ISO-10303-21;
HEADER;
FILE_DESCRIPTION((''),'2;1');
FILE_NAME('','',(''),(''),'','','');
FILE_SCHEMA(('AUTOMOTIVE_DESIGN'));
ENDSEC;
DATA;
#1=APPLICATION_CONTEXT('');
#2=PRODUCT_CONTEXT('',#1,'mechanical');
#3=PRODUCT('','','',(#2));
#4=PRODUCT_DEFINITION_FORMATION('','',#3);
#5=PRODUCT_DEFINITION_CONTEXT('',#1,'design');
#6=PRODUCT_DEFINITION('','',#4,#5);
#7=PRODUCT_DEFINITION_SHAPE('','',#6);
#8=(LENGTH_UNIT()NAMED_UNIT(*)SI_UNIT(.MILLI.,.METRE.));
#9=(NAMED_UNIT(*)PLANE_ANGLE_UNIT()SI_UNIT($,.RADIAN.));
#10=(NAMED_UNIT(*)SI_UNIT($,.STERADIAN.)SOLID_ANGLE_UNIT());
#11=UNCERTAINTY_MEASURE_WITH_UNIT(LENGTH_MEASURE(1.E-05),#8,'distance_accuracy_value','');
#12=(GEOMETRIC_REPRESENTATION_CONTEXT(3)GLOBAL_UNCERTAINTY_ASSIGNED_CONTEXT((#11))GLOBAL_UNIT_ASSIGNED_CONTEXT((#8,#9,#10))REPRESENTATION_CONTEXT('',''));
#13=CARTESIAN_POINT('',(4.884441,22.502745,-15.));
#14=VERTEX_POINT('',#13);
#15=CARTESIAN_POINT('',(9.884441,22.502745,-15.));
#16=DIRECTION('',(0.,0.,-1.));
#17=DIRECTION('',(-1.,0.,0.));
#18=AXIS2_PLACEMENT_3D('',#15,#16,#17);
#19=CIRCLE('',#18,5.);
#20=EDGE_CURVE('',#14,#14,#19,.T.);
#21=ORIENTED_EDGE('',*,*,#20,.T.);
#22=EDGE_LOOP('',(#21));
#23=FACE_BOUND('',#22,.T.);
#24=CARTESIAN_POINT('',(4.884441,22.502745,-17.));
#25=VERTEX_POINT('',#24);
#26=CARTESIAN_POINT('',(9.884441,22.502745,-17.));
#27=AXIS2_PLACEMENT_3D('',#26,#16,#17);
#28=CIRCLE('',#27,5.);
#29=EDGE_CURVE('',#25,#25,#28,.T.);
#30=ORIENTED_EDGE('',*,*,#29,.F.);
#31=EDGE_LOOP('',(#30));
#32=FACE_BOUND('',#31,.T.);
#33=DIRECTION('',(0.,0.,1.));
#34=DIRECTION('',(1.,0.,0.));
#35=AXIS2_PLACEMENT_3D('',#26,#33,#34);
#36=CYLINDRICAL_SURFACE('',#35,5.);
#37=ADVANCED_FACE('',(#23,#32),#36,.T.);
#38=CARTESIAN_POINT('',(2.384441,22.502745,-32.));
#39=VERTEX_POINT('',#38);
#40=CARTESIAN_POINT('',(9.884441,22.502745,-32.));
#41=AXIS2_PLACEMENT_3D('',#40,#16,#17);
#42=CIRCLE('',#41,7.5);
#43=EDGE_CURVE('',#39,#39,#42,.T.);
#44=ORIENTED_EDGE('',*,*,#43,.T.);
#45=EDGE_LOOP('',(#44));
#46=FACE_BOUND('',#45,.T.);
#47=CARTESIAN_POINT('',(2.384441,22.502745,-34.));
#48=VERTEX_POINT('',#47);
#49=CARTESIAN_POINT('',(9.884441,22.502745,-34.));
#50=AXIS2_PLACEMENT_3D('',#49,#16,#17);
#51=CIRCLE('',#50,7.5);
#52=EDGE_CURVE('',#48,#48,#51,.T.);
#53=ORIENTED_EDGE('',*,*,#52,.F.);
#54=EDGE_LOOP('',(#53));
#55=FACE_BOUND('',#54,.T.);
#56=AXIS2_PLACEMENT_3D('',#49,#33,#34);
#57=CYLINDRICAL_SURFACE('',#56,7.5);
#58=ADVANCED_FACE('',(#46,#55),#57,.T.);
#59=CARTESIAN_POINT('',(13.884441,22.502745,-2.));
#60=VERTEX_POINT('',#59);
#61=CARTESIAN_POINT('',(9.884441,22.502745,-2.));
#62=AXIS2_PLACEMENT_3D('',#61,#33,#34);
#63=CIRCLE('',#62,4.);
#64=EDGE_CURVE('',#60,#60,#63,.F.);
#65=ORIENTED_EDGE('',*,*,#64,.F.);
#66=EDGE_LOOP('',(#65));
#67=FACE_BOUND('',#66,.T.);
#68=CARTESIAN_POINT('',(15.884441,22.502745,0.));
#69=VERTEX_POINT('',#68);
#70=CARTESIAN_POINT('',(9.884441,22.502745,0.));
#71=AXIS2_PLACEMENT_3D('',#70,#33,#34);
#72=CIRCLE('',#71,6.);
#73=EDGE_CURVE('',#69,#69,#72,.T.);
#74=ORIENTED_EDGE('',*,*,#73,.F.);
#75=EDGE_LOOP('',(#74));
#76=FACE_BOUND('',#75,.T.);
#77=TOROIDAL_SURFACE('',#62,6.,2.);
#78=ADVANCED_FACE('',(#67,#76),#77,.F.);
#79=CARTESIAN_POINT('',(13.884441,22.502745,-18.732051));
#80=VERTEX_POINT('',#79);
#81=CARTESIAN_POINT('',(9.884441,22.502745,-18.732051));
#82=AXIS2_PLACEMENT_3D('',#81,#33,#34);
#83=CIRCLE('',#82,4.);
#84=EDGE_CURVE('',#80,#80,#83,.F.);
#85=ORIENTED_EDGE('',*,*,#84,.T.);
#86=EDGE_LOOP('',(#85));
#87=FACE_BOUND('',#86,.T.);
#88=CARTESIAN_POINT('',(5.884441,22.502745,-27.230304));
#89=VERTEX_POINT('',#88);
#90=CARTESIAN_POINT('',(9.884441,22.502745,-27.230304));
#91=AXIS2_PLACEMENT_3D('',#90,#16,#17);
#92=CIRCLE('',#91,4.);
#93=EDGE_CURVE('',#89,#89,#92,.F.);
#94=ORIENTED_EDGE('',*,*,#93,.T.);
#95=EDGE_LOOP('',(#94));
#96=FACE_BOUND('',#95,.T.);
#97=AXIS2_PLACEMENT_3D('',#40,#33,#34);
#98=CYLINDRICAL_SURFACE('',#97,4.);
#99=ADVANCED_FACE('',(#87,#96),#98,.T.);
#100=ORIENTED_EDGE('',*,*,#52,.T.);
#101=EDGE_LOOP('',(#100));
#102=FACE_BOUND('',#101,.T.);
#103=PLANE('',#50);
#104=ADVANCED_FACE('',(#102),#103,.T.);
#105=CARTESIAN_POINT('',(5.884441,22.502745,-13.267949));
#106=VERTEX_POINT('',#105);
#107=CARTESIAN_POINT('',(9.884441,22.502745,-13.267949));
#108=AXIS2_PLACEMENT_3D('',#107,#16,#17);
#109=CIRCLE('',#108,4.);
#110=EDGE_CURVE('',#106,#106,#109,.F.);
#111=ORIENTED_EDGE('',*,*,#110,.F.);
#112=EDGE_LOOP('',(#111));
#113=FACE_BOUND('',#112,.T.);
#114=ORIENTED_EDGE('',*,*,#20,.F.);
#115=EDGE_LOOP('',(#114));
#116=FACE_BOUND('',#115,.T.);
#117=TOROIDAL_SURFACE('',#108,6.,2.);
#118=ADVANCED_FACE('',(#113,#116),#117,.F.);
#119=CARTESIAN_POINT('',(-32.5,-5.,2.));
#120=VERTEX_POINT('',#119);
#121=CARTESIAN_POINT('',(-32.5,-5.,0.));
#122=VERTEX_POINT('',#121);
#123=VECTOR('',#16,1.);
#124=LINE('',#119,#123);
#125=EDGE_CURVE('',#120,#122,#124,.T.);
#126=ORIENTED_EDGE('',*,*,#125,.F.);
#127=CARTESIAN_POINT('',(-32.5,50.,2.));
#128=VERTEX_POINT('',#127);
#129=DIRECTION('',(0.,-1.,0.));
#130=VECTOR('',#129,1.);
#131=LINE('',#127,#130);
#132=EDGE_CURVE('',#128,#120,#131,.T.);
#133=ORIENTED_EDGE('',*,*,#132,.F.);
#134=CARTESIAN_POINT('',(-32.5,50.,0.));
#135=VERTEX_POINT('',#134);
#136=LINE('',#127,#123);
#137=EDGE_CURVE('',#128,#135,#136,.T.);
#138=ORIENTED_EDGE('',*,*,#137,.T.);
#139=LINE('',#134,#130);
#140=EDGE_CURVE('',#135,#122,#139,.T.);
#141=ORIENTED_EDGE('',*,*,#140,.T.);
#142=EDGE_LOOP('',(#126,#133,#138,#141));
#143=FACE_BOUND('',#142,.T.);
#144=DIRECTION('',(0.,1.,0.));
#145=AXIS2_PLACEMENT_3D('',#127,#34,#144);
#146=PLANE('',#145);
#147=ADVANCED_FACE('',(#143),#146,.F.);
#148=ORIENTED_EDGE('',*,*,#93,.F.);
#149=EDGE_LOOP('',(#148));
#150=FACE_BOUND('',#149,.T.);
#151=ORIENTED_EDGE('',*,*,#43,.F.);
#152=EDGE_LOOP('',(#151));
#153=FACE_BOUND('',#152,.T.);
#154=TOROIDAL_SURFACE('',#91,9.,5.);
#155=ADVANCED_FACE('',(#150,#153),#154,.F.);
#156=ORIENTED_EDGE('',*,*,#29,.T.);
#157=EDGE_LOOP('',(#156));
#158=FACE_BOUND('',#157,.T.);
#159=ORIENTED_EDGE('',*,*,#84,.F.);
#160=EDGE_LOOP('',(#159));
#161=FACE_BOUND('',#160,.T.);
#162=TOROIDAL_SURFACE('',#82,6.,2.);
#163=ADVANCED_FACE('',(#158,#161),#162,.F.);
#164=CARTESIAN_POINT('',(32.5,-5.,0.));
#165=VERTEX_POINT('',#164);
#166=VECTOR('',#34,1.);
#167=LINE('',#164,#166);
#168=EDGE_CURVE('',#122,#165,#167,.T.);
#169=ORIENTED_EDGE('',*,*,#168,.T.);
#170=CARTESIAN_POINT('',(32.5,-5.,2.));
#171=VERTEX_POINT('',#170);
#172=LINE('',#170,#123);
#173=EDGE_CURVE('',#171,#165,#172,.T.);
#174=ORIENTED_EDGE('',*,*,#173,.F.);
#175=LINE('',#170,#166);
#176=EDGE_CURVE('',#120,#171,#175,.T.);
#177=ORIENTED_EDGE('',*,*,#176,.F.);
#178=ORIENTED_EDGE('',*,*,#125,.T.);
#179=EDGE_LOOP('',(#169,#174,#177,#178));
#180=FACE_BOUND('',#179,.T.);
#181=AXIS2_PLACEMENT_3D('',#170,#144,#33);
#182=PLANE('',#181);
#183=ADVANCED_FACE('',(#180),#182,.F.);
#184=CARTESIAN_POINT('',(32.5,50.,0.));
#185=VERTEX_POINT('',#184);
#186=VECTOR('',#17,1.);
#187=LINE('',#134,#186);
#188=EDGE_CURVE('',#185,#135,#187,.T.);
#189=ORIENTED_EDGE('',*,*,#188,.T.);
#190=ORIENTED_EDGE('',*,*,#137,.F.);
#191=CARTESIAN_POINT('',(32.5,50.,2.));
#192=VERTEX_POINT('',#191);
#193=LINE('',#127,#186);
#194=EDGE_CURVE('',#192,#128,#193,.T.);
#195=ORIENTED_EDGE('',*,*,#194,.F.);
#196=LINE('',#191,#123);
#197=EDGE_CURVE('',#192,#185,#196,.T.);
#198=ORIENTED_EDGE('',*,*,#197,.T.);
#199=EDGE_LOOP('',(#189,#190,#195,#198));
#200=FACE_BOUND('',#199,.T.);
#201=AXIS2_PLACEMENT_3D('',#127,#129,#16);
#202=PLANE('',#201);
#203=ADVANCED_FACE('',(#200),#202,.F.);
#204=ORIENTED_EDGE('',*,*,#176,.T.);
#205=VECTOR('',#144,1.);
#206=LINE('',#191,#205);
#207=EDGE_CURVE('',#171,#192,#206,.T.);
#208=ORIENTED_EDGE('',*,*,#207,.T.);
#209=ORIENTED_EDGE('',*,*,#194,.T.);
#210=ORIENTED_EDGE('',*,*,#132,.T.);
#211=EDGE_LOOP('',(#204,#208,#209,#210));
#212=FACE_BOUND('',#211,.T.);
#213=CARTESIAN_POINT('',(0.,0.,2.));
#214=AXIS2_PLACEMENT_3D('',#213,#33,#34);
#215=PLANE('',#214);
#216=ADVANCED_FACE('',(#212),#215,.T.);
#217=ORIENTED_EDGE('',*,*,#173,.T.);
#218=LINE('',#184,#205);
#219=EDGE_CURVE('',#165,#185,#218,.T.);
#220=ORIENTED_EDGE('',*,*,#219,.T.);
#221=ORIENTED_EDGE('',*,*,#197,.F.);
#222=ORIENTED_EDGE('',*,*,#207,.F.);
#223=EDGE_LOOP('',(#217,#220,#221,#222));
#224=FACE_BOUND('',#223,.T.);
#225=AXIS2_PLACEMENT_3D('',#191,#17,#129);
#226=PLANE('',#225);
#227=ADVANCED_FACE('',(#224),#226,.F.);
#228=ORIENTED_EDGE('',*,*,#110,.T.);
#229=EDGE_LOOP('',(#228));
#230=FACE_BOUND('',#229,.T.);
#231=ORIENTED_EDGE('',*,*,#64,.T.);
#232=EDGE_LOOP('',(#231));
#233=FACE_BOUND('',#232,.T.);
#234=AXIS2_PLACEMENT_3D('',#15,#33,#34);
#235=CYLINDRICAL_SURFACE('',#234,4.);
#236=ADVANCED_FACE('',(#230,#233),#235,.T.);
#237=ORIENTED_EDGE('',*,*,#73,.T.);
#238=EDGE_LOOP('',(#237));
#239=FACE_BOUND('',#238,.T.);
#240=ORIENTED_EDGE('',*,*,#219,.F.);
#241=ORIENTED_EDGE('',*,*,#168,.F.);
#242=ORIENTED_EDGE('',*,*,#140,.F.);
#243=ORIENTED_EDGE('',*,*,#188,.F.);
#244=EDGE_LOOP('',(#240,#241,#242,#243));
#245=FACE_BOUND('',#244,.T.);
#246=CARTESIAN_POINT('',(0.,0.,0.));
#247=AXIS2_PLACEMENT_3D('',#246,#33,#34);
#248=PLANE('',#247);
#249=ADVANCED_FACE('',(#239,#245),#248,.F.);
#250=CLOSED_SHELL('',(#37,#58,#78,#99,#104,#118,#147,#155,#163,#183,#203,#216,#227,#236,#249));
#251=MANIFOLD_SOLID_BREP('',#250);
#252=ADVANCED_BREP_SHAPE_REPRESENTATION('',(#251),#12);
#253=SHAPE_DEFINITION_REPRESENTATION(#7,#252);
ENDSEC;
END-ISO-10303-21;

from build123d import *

# Parameters (mm, degrees)
SKIZZE2_W                       = 65
SKIZZE2_H                       = 100
AUFSATZ_LINEAR_AUSTRAGEN1_DEPTH = 2
SKIZZE3_R                       = 4
AUFSATZ_LINEAR_AUSTRAGEN2_DEPTH = 15
SKIZZE4_R                       = 5
AUFSATZ_LINEAR_AUSTRAGEN3_DEPTH = 2
SKIZZE5_R                       = 4
AUFSATZ_LINEAR_AUSTRAGEN4_DEPTH = 15
SKIZZE6_R                       = 7.5
AUFSATZ_LINEAR_AUSTRAGEN5_DEPTH = 2
VERRUNDUNG1_R                   = 2
VERRUNDUNG2_R                   = 2
VERRUNDUNG3_R                   = 5
SKIZZE7_W                       = 65
SKIZZE7_H                       = 45
SCHNITT_LINEAR_AUSTRAGEN1_DEPTH = 2
VERRUNDUNG4_R                   = 2


with BuildPart() as part:
    # Skizze2 → Aufsatz-Linear austragen1 (new body)
    with BuildSketch(Plane.XY):
        Rectangle(SKIZZE2_W, SKIZZE2_H)
    extrude(amount=AUFSATZ_LINEAR_AUSTRAGEN1_DEPTH)

    # Skizze3 → Aufsatz-Linear austragen2 (add)
    with BuildSketch(Plane(origin=(9.884440789, -5.646814133, 0), x_dir=(-1, 0, 0), z_dir=(0, 0, -1))):
        with Locations(Location((0, 28.149559508, 0), (0, 0, 180))):
            Circle(SKIZZE3_R)
    extrude(amount=AUFSATZ_LINEAR_AUSTRAGEN2_DEPTH)

    # Skizze4 → Aufsatz-Linear austragen3 (add)
    with BuildSketch(Plane(origin=(9.884440789, -5.646814133, -15), x_dir=(-1, 0, 0), z_dir=(0, 0, -1))):
        with Locations((0, 28.149559508)):
            Circle(SKIZZE4_R)
    extrude(amount=AUFSATZ_LINEAR_AUSTRAGEN3_DEPTH)

    # Skizze5 → Aufsatz-Linear austragen4 (add)
    with BuildSketch(Plane(origin=(9.884440789, -5.646814133, -17), x_dir=(-1, 0, 0), z_dir=(0, 0, -1))):
        with Locations(Location((0, 28.149559508, 0), (0, 0, 180))):
            Circle(SKIZZE5_R)
    extrude(amount=AUFSATZ_LINEAR_AUSTRAGEN4_DEPTH)

    # Skizze6 → Aufsatz-Linear austragen5 (add)
    with BuildSketch(Plane(origin=(9.884440789, -5.646814133, -32), x_dir=(-1, 0, 0), z_dir=(0, 0, -1))):
        with Locations((0, 28.149559508)):
            Circle(SKIZZE6_R)
    extrude(amount=AUFSATZ_LINEAR_AUSTRAGEN5_DEPTH)

    # Verrundung1
    # the kernel refuses this fillet: 2 mm, written as the material it adds along each edge
    with BuildSketch(Plane(origin=(9.884440789, 22.502745375, -15), x_dir=(1, 0, 0), z_dir=(0, 1, 0))) as verrundung1_piece_1:
        with BuildLine():
            CenterArc((6, -1.732050808), VERRUNDUNG1_R, 120, 60)
            Line((4, -1.732050808), (3.96, -1.732050808))
            Line((3.96, -1.732050808), (3.96, 0))
            Line((3.96, 0), (4, 0.04))
            ThreePointArc((4, 0.04), (4.5, 0.04), (4.98, 0.034641016))
            Line((4.98, 0.034641016), (5, 0))
        make_face()
    revolve(axis=Axis((9.884440789, 22.502745375, -15), (0, 0, -1)))

    # Verrundung2
    # the kernel refuses this fillet: 2 mm, written as the material it adds along each edge
    with BuildSketch(Plane(origin=(9.884440789, 22.502745375, -17), x_dir=(1, 0, 0), z_dir=(0, 1, 0))) as verrundung2_piece_1:
        with BuildLine():
            CenterArc((6, 1.732050808), VERRUNDUNG2_R, 180, 60)
            Line((4, 1.732050808), (3.96, 1.732050808))
            Line((3.96, 1.732050808), (3.96, 0))
            Line((3.96, 0), (4, -0.04))
            ThreePointArc((4, -0.04), (4.5, -0.04), (4.98, -0.034641016))
            Line((4.98, -0.034641016), (5, 0))
        make_face()
    revolve(axis=Axis((9.884440789, 22.502745375, -17), (0, 0, -1)))

    # Verrundung3
    # the kernel refuses this fillet: 5 mm, written as the material it adds along each edge
    with BuildSketch(Plane(origin=(9.884440789, 22.502745375, -32), x_dir=(1, 0, 0), z_dir=(0, 1, 0))) as verrundung3_piece_1:
        with BuildLine():
            CenterArc((9, -4.769696007), VERRUNDUNG3_R, 107.457603124, 72.542396876)
            Line((7.5, 0), (7.47, 0.09539392))
            ThreePointArc((7.47, 0.09539392), (5.75, 0.1), (4, 0.1))
            Line((4, 0.1), (3.9, 0))
            Line((3.9, 0), (3.9, -4.769696007))
            Line((3.9, -4.769696007), (4, -4.769696007))
        make_face()
    revolve(axis=Axis((9.884440789, 22.502745375, -32), (0, 0, -1)))

    # Skizze7 → Schnitt-Linear austragen1 (cut)
    with BuildSketch(Plane(origin=(0, 0, 0), x_dir=(-1, 0, 0), z_dir=(0, 0, -1))):
        with Locations((0, -27.5)):
            Rectangle(SKIZZE7_W, SKIZZE7_H)
    extrude(amount=-SCHNITT_LINEAR_AUSTRAGEN1_DEPTH, mode=Mode.SUBTRACT)

    # Verrundung4
    verrundung4_edges = [part.edges().sort_by_distance(p)[0] for p in [
        (5.884440789, 22.502745375, 0),
    ]]
    fillet(verrundung4_edges, radius=VERRUNDUNG4_R)


solid = part.part
